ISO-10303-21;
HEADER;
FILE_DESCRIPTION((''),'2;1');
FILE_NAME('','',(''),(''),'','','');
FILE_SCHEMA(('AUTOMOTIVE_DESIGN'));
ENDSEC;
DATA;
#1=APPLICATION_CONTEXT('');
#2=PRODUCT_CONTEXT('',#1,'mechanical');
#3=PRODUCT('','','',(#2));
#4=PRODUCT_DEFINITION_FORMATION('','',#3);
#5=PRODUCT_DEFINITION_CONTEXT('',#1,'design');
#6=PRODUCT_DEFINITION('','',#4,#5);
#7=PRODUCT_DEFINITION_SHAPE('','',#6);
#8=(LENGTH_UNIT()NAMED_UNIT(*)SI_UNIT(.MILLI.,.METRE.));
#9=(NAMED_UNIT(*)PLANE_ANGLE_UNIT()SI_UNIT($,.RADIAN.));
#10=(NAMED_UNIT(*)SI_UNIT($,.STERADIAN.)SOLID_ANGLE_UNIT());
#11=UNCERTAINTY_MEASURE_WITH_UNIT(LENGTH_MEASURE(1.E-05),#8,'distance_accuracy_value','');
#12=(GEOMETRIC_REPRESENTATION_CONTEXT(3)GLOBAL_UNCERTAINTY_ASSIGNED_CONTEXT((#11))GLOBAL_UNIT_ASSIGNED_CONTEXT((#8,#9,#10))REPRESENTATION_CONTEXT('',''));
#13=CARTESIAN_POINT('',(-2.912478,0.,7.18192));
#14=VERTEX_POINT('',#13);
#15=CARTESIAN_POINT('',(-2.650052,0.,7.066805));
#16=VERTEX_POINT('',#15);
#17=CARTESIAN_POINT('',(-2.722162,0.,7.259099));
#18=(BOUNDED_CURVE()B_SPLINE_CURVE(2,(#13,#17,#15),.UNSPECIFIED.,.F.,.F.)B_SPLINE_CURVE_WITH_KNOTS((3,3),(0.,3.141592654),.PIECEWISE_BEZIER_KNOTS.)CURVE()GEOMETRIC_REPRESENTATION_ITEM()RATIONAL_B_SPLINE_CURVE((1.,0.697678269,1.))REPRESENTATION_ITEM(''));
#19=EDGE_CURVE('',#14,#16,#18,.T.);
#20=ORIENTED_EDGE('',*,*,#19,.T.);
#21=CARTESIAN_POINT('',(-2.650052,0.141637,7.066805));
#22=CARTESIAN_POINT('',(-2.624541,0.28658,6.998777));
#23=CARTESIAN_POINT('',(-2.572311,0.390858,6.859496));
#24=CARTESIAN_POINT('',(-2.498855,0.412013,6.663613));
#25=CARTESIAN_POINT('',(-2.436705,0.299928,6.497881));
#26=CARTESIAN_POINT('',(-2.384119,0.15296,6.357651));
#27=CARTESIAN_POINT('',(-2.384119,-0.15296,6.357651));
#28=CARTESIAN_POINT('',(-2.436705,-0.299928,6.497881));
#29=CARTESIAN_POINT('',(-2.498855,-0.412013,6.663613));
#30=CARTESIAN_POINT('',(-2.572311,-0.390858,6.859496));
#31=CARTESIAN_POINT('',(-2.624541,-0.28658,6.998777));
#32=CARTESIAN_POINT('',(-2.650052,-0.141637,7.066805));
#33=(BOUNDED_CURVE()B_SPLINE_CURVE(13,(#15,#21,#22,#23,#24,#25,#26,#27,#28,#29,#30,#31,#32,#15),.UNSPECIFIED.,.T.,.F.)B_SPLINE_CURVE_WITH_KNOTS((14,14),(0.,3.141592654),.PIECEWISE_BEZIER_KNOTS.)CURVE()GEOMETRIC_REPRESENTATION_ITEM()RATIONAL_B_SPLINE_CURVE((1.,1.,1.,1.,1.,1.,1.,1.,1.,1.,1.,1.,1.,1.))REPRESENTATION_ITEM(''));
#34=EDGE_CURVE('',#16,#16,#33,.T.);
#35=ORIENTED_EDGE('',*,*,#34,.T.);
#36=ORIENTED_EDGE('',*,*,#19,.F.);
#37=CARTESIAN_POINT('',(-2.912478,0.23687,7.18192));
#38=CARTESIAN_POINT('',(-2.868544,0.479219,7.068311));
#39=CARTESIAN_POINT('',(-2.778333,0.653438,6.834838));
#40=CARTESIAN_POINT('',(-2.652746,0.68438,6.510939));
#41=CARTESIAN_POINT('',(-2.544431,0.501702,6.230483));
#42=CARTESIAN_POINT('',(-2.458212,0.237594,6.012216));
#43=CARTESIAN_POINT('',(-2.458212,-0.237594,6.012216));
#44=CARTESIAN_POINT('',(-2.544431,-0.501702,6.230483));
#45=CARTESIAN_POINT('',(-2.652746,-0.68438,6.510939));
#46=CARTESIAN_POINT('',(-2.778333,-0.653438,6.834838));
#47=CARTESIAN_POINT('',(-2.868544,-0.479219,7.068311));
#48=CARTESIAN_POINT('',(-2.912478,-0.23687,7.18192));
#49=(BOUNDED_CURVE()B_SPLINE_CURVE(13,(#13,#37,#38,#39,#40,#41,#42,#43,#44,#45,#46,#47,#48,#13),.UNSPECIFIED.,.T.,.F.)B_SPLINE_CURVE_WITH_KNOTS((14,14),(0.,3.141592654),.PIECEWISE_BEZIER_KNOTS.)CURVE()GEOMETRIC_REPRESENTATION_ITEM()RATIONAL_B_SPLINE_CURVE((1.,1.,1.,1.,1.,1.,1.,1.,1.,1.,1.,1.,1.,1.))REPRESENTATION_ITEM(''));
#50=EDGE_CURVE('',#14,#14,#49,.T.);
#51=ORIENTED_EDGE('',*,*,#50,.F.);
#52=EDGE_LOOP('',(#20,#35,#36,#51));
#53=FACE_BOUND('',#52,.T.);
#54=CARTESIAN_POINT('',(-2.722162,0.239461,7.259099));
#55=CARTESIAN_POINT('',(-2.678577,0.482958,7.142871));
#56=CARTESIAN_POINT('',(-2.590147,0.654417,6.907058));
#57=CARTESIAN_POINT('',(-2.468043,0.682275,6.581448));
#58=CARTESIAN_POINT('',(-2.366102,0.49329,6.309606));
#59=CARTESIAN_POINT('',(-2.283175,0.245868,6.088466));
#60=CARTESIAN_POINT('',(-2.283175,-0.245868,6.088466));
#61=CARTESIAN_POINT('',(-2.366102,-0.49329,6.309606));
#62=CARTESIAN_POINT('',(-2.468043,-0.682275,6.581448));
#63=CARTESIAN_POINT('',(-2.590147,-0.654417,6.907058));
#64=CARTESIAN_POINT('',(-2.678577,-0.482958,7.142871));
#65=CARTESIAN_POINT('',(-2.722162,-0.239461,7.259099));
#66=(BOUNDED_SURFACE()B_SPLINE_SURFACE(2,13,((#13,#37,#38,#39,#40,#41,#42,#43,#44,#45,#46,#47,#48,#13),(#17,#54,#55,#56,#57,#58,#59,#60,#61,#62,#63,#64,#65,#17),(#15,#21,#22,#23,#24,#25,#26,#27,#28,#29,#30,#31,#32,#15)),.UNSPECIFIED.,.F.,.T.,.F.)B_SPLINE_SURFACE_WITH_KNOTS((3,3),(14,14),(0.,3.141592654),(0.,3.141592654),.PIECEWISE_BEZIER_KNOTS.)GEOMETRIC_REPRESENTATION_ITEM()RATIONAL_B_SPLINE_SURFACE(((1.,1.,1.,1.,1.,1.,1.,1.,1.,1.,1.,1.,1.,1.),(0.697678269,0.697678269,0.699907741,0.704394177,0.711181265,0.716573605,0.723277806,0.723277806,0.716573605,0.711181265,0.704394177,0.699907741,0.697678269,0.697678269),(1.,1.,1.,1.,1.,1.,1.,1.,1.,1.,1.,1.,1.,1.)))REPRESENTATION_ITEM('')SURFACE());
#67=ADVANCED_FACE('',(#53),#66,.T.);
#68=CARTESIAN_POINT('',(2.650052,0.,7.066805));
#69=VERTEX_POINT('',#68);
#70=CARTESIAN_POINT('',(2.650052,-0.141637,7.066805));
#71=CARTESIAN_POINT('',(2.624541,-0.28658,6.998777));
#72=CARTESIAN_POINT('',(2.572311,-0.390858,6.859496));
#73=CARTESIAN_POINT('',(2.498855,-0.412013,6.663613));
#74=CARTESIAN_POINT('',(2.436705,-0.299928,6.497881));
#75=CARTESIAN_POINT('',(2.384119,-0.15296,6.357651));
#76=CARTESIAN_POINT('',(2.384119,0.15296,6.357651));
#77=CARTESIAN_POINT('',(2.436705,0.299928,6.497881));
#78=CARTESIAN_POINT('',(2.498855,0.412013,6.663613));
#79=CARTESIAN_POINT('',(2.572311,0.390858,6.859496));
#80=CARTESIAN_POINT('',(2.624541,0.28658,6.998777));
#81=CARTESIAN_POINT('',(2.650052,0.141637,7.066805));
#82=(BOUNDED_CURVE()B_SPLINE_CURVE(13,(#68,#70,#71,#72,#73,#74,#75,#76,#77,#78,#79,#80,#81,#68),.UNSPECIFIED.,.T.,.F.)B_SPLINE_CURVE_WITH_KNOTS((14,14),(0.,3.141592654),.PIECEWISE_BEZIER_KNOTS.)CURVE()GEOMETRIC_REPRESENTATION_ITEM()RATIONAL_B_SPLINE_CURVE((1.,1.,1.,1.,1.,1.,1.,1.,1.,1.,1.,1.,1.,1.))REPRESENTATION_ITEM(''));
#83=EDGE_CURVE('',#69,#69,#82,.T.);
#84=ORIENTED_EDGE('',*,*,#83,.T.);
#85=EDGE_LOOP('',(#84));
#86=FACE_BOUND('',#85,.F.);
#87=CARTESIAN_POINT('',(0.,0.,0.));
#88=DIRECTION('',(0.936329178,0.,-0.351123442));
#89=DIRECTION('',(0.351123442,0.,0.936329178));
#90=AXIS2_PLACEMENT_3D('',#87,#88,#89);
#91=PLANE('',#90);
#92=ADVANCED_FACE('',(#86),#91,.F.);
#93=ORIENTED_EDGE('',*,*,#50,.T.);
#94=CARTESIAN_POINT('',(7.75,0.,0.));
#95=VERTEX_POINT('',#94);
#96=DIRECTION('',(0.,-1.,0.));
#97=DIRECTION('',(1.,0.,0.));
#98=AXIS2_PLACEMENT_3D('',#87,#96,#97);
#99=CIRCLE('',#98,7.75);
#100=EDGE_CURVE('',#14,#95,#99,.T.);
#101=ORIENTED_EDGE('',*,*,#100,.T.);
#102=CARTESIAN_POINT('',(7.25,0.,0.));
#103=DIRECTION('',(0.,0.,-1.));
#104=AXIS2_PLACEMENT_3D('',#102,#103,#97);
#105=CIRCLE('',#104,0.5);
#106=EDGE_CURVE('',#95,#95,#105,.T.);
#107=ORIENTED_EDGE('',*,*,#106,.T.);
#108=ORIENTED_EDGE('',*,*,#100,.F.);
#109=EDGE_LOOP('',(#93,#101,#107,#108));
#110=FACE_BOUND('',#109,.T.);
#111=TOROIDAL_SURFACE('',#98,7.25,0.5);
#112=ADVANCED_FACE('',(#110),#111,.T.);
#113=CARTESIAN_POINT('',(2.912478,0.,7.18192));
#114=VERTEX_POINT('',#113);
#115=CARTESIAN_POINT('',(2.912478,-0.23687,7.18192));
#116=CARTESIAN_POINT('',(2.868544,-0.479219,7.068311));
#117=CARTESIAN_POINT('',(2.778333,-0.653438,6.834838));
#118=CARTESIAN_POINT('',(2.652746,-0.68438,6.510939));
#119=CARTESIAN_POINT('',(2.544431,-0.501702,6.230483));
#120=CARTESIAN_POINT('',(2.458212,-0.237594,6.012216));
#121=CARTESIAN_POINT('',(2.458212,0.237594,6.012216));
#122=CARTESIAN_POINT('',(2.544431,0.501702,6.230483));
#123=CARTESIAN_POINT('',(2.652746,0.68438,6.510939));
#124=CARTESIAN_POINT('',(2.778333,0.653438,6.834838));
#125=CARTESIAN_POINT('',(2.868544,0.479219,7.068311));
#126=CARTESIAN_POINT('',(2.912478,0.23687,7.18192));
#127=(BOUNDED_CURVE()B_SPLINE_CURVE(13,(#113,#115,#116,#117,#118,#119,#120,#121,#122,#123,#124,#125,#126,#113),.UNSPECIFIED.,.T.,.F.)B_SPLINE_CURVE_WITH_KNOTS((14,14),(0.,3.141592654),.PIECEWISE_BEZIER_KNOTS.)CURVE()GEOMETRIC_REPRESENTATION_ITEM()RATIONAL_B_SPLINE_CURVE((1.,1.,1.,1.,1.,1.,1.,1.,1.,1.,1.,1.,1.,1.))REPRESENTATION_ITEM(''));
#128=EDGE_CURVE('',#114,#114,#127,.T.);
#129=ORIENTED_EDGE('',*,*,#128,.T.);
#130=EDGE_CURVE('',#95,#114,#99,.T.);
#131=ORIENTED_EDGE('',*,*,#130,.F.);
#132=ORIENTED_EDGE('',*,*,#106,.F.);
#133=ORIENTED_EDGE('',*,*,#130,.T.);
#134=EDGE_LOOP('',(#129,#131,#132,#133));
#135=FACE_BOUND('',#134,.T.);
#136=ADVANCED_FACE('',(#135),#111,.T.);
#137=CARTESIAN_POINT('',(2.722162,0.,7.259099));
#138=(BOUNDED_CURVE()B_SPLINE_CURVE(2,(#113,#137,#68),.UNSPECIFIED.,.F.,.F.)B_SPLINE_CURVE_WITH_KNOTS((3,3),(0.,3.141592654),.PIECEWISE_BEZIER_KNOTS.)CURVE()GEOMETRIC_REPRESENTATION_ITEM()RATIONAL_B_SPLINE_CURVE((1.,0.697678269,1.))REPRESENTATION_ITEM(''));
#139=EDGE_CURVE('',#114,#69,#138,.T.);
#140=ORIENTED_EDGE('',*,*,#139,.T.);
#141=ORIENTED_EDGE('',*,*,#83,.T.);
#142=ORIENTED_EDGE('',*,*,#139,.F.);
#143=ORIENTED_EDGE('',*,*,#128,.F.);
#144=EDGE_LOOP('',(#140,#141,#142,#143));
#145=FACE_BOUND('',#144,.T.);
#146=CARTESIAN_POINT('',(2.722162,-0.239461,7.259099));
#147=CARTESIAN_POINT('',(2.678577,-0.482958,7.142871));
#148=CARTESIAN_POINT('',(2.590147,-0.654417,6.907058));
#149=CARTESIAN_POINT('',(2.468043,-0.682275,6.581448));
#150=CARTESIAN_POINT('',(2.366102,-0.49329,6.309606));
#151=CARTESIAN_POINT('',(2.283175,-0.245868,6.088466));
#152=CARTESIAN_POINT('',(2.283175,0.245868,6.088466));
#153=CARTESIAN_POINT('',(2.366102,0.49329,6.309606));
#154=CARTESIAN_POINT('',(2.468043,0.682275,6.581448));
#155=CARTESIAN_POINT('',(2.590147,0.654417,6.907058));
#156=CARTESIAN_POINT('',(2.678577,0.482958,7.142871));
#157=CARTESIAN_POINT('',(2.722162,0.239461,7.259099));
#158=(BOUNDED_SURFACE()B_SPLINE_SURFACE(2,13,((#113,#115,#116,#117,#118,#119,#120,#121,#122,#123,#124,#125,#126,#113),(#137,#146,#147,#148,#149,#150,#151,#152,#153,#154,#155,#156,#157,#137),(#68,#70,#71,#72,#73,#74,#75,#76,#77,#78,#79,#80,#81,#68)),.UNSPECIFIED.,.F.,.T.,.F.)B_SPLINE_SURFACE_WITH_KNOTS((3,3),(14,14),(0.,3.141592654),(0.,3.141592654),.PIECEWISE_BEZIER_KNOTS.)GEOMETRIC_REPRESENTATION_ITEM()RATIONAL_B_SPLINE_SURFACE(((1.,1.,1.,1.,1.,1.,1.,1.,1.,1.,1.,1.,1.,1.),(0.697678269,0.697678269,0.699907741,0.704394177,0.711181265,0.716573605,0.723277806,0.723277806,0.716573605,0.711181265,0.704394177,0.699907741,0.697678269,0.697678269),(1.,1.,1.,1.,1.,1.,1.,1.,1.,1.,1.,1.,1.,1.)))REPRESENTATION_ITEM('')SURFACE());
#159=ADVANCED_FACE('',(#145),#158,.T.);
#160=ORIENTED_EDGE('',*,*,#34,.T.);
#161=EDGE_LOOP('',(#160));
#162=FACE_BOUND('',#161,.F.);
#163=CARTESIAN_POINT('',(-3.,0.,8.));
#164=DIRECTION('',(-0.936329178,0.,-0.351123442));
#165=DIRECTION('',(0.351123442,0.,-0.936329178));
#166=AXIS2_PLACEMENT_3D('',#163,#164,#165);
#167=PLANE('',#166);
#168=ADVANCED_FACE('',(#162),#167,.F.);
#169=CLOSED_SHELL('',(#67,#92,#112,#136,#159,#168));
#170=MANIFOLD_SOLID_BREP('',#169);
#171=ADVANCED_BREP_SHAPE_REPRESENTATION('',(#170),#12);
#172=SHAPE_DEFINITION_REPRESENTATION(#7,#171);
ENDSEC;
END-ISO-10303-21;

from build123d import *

# Parameters (mm, degrees)
F1_R     = 0.5
F4_DEPTH = 12.5
F5_R     = 0.2


with BuildPart() as f2:
    # F2: sweep along a path in F0
    with BuildLine(Plane.XZ) as f2_path:
        CenterArc((0, 0), 7.25, 0, 360)
    # F1 (on Top) → F2 (sweep)
    with BuildSketch(Plane.XY):
        with Locations((7.25, 0)):
            Circle(F1_R)
    sweep(path=f2_path.line)

    # F3 (on Front) → F4 (cut, symmetric)
    with BuildSketch(Plane.XZ):
        Polygon((-3, 8), (0, 0), (3, 8), align=None)
    extrude(amount=F4_DEPTH, both=True, mode=Mode.SUBTRACT)

    # F5
    f5_edges = [f2.edges().sort_by_distance(p)[0] for p in [
        (-2.370083, 0, 6.320222),
        (2.370083, 0, 6.320222),
    ]]
    fillet(f5_edges, radius=F5_R)


solid = f2.part
